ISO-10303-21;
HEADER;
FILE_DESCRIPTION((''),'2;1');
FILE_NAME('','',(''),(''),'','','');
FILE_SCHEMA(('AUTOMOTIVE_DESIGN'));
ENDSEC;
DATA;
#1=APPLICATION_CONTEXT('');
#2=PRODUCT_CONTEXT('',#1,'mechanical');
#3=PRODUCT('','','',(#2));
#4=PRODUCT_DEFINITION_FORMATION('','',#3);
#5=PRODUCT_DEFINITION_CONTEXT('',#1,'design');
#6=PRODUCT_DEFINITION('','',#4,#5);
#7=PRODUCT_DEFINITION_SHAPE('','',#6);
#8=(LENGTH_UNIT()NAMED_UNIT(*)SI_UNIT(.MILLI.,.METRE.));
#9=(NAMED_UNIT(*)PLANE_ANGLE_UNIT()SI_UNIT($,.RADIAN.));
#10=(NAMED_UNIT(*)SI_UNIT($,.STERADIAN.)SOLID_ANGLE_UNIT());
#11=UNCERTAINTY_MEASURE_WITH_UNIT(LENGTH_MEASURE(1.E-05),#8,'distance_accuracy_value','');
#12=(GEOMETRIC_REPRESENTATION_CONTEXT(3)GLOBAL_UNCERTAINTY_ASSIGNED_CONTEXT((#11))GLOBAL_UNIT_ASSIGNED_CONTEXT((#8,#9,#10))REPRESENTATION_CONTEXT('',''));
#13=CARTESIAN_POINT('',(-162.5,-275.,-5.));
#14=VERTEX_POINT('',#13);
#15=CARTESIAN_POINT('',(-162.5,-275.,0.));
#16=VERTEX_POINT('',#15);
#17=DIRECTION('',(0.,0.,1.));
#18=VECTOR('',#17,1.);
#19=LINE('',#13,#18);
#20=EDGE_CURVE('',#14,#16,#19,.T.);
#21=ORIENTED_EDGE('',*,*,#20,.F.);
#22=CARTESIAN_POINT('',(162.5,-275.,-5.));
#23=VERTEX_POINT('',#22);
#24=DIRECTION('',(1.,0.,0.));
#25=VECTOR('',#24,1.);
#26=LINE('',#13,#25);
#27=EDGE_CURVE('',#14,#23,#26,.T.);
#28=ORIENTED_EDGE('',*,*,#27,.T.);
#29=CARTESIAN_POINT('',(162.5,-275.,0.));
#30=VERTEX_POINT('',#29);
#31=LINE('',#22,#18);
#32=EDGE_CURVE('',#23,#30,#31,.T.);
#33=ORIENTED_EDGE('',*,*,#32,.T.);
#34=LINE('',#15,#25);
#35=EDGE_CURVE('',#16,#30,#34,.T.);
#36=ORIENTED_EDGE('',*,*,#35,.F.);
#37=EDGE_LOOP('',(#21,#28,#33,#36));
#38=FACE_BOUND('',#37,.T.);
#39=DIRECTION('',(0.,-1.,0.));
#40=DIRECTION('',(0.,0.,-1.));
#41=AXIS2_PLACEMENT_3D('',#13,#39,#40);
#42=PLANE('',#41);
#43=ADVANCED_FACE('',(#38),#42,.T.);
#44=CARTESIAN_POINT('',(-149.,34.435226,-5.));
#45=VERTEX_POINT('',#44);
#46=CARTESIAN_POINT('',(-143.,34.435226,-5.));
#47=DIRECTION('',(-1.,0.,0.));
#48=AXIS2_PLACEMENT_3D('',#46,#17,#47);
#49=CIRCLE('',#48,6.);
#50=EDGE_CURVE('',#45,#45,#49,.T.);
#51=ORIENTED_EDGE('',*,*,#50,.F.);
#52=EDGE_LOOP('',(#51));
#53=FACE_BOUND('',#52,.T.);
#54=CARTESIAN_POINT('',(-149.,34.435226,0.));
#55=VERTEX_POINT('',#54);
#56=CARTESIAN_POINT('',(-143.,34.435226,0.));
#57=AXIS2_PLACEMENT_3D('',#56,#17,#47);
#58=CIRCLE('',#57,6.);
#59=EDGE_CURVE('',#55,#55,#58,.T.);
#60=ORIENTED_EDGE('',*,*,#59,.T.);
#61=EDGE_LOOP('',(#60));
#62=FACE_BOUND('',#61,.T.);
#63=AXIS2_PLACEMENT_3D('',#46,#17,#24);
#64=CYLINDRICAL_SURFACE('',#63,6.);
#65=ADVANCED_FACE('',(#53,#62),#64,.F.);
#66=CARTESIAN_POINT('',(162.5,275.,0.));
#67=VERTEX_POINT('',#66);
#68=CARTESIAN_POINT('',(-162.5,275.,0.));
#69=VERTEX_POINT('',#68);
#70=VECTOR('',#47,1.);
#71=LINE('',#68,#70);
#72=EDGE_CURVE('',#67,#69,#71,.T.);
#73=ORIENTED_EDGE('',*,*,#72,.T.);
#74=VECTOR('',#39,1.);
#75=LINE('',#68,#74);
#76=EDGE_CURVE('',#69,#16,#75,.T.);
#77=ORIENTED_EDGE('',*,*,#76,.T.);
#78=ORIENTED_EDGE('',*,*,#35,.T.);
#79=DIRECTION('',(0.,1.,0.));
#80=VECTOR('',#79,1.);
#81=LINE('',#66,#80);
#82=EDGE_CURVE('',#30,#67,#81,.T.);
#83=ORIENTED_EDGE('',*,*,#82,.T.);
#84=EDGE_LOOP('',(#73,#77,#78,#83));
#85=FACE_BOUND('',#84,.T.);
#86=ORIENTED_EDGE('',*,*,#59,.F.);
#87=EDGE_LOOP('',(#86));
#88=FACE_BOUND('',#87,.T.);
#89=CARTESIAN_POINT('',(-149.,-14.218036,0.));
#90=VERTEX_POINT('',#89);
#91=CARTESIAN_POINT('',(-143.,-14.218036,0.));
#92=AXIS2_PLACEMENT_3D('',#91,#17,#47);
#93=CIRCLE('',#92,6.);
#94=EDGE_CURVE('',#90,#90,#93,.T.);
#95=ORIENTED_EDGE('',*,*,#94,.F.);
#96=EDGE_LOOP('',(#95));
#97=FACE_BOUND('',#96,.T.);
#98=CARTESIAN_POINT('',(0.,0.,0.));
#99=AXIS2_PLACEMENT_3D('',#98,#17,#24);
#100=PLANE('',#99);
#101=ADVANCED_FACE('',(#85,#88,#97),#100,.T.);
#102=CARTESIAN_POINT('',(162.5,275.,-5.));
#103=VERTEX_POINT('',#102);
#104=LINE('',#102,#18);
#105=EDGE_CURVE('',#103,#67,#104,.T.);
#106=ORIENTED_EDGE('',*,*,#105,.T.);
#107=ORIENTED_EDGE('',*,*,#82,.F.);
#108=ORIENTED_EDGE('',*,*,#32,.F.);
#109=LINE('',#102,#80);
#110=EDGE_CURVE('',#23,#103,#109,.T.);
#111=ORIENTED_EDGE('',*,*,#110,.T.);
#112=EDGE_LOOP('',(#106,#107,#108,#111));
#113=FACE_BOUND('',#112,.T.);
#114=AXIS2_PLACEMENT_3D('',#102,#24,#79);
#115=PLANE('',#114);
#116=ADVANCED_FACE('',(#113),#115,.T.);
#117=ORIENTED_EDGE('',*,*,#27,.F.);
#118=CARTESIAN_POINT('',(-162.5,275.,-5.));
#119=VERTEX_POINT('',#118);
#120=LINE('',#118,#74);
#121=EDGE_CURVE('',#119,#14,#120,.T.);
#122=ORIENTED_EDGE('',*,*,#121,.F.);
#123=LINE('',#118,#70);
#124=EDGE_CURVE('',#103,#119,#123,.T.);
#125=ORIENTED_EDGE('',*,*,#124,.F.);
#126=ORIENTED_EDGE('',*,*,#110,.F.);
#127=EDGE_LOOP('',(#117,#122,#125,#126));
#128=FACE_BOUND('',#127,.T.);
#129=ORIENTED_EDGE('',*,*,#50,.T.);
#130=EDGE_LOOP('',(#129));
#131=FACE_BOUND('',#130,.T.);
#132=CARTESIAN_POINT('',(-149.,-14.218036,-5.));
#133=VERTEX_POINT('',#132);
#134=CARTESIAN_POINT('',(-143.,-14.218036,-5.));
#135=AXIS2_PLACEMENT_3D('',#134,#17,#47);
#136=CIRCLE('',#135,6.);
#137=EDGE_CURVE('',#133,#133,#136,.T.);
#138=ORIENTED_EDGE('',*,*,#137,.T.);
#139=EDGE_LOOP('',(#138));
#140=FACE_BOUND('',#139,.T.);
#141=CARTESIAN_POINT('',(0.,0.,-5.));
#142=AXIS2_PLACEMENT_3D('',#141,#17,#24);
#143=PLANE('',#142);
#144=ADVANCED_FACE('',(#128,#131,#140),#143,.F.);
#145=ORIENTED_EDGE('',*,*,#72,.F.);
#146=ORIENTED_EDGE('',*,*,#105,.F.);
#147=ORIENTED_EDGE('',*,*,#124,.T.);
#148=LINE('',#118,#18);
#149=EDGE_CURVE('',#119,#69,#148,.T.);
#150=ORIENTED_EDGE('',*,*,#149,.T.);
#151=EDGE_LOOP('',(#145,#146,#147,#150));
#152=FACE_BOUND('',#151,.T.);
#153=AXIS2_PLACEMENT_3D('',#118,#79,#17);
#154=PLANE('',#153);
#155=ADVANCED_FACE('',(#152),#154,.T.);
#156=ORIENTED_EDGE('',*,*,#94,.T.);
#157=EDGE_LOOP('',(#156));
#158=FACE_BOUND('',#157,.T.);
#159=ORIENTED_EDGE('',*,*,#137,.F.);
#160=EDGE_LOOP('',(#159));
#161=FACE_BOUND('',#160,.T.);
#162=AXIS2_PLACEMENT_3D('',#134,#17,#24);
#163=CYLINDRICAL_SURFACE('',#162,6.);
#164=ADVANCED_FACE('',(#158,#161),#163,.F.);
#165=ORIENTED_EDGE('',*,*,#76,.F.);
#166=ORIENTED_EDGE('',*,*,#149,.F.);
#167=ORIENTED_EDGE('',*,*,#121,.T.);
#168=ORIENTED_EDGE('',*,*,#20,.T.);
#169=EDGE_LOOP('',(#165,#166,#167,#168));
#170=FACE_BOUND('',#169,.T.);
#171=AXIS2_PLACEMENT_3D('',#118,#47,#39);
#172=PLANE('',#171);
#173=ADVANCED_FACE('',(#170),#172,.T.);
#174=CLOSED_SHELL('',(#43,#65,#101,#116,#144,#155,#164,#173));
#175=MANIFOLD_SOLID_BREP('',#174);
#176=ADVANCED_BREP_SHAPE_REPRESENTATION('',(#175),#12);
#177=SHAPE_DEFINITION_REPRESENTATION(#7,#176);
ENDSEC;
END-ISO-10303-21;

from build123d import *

# Parameters (mm, degrees)
SKETCH1_W          = 325
SKETCH1_H          = 550
SKETCH1_R          = 6
BASE_FLANGE1_DEPTH = 5


# Sheet-metal steps are written as plain solids
with BuildPart() as part:
    # Sketch1 → Base-Flange1 (new body)
    with BuildSketch(Plane.XY):
        Rectangle(SKETCH1_W, SKETCH1_H)
        with Locations(Location((-143, -14.218036313, 0), (0, 0, 180))):
            Circle(SKETCH1_R, mode=Mode.SUBTRACT)
        with Locations(Location((-143, 34.435225531, 0), (0, 0, 180))):
            Circle(SKETCH1_R, mode=Mode.SUBTRACT)
    extrude(amount=-BASE_FLANGE1_DEPTH)


solid = part.part
